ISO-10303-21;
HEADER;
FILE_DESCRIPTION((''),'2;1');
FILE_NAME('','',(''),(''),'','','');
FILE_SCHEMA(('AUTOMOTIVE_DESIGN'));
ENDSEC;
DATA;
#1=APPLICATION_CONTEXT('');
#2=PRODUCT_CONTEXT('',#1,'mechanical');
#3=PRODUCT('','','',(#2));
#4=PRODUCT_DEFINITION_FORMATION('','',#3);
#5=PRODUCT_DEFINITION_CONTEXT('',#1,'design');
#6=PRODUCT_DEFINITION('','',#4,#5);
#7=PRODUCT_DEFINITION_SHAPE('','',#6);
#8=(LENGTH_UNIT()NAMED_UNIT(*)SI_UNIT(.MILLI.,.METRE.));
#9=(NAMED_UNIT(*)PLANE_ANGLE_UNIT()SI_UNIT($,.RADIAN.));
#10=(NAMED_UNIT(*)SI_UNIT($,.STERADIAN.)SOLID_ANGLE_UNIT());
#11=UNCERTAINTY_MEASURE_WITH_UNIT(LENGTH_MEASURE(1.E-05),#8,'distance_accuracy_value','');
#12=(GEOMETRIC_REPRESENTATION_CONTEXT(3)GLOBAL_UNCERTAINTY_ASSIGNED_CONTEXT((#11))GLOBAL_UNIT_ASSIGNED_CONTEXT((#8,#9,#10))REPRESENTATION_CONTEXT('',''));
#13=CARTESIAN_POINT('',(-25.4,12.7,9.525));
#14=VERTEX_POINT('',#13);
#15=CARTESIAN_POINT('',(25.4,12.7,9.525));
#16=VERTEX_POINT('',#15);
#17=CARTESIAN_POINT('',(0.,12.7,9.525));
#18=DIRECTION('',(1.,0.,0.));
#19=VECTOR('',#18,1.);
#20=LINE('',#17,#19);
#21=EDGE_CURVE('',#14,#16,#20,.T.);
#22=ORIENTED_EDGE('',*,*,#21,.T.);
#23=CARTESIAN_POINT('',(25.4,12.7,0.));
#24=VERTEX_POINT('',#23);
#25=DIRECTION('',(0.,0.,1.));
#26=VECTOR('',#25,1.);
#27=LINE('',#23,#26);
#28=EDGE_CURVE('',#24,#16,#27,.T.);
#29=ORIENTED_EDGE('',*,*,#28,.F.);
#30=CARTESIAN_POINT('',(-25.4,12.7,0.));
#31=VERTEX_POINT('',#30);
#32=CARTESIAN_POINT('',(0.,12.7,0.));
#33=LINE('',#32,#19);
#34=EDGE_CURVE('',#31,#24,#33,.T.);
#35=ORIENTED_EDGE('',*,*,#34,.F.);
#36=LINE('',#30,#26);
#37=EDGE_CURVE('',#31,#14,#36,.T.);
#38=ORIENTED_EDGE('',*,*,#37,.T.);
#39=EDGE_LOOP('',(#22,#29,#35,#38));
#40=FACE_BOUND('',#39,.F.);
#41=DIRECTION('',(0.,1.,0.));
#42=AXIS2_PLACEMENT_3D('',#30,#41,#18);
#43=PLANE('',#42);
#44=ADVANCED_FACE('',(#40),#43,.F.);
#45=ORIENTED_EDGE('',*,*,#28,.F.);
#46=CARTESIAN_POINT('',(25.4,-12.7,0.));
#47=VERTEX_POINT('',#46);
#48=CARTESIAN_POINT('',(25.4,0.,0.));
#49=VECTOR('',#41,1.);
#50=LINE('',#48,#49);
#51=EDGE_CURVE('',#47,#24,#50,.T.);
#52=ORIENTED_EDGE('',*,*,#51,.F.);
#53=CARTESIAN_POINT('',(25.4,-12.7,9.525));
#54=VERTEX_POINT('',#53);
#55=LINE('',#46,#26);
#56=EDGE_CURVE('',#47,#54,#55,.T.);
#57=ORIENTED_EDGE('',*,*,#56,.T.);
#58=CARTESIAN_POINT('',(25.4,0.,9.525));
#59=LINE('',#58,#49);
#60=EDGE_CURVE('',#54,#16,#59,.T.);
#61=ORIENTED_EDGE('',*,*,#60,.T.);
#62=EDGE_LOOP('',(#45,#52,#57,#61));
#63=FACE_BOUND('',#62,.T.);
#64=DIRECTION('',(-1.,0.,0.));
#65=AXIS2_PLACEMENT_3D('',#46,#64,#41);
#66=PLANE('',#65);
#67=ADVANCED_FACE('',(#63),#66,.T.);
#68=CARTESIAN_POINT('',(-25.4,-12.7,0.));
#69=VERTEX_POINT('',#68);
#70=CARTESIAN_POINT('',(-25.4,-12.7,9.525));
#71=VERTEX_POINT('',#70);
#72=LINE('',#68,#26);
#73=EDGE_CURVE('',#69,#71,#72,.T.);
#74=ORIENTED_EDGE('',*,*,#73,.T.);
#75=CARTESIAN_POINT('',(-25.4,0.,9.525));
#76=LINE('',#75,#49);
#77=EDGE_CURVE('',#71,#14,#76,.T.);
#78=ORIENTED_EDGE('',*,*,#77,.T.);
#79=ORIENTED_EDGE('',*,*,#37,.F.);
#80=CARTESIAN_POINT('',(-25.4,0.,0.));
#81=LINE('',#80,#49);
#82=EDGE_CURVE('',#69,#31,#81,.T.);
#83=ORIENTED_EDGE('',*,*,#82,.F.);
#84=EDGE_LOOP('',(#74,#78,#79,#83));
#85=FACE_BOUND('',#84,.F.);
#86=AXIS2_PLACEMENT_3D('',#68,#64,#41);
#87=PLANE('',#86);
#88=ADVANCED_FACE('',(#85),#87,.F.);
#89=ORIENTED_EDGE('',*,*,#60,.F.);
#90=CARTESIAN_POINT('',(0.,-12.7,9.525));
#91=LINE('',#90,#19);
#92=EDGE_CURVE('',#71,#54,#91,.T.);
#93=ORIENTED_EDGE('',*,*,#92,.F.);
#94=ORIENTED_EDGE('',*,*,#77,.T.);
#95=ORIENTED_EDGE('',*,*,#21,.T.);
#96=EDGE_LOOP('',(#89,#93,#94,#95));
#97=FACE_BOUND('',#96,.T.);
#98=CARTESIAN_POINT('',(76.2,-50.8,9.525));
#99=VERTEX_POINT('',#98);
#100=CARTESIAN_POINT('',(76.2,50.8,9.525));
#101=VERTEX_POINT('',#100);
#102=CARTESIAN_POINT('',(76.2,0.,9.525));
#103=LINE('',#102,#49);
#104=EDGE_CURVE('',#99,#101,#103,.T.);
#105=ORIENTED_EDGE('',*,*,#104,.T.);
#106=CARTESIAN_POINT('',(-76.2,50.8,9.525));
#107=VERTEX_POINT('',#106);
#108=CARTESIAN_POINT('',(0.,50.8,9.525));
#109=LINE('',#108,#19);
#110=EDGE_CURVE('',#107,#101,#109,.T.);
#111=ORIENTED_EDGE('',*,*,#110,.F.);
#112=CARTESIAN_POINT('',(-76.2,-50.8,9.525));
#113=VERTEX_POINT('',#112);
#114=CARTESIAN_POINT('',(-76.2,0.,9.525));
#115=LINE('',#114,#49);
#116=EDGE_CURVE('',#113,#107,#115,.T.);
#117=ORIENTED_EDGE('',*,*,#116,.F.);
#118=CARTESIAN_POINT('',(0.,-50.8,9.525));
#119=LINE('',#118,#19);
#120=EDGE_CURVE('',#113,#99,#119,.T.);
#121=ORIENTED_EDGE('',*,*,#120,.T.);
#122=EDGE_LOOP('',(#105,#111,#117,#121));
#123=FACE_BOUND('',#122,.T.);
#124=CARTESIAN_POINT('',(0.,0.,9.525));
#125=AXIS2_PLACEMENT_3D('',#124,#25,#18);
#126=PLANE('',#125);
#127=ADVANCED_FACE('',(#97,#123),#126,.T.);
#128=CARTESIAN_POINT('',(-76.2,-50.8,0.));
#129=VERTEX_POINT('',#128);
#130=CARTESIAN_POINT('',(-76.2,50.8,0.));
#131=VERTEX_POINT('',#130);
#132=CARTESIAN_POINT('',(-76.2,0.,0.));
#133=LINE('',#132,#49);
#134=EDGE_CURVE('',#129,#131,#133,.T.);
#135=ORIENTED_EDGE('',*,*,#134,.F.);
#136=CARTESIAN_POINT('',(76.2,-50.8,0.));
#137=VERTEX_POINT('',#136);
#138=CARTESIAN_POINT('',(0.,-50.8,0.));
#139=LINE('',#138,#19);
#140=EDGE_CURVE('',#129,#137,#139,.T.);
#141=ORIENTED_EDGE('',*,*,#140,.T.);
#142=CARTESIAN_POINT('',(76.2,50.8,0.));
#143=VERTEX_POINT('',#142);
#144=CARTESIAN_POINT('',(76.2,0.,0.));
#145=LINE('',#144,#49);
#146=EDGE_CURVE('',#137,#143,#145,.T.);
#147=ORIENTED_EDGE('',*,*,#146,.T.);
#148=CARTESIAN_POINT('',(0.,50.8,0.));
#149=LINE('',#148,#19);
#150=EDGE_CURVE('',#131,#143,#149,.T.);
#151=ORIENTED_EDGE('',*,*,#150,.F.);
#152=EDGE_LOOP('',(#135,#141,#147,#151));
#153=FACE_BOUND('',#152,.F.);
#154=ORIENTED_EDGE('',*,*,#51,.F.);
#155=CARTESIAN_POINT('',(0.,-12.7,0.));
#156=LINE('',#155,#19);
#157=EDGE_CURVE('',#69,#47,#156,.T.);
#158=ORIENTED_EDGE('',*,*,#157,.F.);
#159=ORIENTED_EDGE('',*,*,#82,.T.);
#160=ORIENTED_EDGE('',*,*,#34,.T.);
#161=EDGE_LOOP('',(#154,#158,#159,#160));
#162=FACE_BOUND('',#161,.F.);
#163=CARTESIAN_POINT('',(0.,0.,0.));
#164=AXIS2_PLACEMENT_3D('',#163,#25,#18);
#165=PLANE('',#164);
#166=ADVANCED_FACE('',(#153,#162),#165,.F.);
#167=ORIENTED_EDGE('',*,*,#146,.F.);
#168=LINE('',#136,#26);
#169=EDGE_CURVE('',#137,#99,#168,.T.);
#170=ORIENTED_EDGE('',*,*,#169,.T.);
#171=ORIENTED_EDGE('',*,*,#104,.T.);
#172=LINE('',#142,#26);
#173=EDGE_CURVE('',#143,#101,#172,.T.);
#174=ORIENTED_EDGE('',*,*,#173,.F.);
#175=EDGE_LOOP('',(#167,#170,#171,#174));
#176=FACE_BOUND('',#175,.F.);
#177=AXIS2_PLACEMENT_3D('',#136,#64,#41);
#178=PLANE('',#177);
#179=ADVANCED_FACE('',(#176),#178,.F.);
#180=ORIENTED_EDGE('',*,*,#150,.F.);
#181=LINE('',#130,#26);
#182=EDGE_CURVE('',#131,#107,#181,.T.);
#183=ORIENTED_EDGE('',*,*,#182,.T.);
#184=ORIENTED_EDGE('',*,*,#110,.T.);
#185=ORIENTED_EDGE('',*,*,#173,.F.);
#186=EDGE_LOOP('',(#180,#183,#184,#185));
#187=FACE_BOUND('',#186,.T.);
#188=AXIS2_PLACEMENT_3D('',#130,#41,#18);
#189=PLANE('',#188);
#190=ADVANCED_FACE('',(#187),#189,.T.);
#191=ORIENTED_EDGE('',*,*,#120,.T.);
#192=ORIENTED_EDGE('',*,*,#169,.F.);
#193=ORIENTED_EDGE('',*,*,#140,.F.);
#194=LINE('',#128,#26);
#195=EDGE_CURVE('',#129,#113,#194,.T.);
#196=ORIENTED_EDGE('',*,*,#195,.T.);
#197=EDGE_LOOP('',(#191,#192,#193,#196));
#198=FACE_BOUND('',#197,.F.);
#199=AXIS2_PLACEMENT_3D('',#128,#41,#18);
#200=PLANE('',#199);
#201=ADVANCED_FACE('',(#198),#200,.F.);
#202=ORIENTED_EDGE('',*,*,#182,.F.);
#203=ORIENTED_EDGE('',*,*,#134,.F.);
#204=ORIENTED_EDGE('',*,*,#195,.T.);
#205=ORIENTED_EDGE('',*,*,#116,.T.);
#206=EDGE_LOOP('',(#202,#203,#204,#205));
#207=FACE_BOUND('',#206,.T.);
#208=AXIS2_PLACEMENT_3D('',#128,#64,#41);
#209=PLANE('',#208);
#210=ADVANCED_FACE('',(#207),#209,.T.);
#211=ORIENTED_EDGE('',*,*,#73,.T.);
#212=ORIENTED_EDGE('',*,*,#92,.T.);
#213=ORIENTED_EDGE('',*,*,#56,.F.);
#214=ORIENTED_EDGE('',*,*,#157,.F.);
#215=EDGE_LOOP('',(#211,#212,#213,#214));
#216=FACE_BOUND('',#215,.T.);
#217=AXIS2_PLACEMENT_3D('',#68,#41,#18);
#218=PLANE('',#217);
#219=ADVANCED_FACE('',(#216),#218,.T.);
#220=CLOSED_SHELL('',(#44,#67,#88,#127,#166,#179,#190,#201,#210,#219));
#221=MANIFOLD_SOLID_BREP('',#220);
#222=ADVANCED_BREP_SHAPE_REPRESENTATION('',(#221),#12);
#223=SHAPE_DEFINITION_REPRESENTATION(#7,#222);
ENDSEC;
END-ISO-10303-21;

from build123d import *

# Parameters (mm, degrees)
F0_W     = 152.4
F0_H     = 101.6
F0_W_2   = 50.8
F0_H_2   = 25.4
F1_DEPTH = 9.525


# Not quite as in the source:
# - a length typed as a fraction of an inch, garbled in the dataset ("3 / 203.2 mm" for 3/8 in), is restored


with BuildPart() as f1:
    # F0 (on Top) → F1 (new body)
    with BuildSketch(Plane.XY):
        Rectangle(F0_W, F0_H)
        Rectangle(F0_W_2, F0_H_2, mode=Mode.SUBTRACT)
    extrude(amount=F1_DEPTH)


solid = f1.part
